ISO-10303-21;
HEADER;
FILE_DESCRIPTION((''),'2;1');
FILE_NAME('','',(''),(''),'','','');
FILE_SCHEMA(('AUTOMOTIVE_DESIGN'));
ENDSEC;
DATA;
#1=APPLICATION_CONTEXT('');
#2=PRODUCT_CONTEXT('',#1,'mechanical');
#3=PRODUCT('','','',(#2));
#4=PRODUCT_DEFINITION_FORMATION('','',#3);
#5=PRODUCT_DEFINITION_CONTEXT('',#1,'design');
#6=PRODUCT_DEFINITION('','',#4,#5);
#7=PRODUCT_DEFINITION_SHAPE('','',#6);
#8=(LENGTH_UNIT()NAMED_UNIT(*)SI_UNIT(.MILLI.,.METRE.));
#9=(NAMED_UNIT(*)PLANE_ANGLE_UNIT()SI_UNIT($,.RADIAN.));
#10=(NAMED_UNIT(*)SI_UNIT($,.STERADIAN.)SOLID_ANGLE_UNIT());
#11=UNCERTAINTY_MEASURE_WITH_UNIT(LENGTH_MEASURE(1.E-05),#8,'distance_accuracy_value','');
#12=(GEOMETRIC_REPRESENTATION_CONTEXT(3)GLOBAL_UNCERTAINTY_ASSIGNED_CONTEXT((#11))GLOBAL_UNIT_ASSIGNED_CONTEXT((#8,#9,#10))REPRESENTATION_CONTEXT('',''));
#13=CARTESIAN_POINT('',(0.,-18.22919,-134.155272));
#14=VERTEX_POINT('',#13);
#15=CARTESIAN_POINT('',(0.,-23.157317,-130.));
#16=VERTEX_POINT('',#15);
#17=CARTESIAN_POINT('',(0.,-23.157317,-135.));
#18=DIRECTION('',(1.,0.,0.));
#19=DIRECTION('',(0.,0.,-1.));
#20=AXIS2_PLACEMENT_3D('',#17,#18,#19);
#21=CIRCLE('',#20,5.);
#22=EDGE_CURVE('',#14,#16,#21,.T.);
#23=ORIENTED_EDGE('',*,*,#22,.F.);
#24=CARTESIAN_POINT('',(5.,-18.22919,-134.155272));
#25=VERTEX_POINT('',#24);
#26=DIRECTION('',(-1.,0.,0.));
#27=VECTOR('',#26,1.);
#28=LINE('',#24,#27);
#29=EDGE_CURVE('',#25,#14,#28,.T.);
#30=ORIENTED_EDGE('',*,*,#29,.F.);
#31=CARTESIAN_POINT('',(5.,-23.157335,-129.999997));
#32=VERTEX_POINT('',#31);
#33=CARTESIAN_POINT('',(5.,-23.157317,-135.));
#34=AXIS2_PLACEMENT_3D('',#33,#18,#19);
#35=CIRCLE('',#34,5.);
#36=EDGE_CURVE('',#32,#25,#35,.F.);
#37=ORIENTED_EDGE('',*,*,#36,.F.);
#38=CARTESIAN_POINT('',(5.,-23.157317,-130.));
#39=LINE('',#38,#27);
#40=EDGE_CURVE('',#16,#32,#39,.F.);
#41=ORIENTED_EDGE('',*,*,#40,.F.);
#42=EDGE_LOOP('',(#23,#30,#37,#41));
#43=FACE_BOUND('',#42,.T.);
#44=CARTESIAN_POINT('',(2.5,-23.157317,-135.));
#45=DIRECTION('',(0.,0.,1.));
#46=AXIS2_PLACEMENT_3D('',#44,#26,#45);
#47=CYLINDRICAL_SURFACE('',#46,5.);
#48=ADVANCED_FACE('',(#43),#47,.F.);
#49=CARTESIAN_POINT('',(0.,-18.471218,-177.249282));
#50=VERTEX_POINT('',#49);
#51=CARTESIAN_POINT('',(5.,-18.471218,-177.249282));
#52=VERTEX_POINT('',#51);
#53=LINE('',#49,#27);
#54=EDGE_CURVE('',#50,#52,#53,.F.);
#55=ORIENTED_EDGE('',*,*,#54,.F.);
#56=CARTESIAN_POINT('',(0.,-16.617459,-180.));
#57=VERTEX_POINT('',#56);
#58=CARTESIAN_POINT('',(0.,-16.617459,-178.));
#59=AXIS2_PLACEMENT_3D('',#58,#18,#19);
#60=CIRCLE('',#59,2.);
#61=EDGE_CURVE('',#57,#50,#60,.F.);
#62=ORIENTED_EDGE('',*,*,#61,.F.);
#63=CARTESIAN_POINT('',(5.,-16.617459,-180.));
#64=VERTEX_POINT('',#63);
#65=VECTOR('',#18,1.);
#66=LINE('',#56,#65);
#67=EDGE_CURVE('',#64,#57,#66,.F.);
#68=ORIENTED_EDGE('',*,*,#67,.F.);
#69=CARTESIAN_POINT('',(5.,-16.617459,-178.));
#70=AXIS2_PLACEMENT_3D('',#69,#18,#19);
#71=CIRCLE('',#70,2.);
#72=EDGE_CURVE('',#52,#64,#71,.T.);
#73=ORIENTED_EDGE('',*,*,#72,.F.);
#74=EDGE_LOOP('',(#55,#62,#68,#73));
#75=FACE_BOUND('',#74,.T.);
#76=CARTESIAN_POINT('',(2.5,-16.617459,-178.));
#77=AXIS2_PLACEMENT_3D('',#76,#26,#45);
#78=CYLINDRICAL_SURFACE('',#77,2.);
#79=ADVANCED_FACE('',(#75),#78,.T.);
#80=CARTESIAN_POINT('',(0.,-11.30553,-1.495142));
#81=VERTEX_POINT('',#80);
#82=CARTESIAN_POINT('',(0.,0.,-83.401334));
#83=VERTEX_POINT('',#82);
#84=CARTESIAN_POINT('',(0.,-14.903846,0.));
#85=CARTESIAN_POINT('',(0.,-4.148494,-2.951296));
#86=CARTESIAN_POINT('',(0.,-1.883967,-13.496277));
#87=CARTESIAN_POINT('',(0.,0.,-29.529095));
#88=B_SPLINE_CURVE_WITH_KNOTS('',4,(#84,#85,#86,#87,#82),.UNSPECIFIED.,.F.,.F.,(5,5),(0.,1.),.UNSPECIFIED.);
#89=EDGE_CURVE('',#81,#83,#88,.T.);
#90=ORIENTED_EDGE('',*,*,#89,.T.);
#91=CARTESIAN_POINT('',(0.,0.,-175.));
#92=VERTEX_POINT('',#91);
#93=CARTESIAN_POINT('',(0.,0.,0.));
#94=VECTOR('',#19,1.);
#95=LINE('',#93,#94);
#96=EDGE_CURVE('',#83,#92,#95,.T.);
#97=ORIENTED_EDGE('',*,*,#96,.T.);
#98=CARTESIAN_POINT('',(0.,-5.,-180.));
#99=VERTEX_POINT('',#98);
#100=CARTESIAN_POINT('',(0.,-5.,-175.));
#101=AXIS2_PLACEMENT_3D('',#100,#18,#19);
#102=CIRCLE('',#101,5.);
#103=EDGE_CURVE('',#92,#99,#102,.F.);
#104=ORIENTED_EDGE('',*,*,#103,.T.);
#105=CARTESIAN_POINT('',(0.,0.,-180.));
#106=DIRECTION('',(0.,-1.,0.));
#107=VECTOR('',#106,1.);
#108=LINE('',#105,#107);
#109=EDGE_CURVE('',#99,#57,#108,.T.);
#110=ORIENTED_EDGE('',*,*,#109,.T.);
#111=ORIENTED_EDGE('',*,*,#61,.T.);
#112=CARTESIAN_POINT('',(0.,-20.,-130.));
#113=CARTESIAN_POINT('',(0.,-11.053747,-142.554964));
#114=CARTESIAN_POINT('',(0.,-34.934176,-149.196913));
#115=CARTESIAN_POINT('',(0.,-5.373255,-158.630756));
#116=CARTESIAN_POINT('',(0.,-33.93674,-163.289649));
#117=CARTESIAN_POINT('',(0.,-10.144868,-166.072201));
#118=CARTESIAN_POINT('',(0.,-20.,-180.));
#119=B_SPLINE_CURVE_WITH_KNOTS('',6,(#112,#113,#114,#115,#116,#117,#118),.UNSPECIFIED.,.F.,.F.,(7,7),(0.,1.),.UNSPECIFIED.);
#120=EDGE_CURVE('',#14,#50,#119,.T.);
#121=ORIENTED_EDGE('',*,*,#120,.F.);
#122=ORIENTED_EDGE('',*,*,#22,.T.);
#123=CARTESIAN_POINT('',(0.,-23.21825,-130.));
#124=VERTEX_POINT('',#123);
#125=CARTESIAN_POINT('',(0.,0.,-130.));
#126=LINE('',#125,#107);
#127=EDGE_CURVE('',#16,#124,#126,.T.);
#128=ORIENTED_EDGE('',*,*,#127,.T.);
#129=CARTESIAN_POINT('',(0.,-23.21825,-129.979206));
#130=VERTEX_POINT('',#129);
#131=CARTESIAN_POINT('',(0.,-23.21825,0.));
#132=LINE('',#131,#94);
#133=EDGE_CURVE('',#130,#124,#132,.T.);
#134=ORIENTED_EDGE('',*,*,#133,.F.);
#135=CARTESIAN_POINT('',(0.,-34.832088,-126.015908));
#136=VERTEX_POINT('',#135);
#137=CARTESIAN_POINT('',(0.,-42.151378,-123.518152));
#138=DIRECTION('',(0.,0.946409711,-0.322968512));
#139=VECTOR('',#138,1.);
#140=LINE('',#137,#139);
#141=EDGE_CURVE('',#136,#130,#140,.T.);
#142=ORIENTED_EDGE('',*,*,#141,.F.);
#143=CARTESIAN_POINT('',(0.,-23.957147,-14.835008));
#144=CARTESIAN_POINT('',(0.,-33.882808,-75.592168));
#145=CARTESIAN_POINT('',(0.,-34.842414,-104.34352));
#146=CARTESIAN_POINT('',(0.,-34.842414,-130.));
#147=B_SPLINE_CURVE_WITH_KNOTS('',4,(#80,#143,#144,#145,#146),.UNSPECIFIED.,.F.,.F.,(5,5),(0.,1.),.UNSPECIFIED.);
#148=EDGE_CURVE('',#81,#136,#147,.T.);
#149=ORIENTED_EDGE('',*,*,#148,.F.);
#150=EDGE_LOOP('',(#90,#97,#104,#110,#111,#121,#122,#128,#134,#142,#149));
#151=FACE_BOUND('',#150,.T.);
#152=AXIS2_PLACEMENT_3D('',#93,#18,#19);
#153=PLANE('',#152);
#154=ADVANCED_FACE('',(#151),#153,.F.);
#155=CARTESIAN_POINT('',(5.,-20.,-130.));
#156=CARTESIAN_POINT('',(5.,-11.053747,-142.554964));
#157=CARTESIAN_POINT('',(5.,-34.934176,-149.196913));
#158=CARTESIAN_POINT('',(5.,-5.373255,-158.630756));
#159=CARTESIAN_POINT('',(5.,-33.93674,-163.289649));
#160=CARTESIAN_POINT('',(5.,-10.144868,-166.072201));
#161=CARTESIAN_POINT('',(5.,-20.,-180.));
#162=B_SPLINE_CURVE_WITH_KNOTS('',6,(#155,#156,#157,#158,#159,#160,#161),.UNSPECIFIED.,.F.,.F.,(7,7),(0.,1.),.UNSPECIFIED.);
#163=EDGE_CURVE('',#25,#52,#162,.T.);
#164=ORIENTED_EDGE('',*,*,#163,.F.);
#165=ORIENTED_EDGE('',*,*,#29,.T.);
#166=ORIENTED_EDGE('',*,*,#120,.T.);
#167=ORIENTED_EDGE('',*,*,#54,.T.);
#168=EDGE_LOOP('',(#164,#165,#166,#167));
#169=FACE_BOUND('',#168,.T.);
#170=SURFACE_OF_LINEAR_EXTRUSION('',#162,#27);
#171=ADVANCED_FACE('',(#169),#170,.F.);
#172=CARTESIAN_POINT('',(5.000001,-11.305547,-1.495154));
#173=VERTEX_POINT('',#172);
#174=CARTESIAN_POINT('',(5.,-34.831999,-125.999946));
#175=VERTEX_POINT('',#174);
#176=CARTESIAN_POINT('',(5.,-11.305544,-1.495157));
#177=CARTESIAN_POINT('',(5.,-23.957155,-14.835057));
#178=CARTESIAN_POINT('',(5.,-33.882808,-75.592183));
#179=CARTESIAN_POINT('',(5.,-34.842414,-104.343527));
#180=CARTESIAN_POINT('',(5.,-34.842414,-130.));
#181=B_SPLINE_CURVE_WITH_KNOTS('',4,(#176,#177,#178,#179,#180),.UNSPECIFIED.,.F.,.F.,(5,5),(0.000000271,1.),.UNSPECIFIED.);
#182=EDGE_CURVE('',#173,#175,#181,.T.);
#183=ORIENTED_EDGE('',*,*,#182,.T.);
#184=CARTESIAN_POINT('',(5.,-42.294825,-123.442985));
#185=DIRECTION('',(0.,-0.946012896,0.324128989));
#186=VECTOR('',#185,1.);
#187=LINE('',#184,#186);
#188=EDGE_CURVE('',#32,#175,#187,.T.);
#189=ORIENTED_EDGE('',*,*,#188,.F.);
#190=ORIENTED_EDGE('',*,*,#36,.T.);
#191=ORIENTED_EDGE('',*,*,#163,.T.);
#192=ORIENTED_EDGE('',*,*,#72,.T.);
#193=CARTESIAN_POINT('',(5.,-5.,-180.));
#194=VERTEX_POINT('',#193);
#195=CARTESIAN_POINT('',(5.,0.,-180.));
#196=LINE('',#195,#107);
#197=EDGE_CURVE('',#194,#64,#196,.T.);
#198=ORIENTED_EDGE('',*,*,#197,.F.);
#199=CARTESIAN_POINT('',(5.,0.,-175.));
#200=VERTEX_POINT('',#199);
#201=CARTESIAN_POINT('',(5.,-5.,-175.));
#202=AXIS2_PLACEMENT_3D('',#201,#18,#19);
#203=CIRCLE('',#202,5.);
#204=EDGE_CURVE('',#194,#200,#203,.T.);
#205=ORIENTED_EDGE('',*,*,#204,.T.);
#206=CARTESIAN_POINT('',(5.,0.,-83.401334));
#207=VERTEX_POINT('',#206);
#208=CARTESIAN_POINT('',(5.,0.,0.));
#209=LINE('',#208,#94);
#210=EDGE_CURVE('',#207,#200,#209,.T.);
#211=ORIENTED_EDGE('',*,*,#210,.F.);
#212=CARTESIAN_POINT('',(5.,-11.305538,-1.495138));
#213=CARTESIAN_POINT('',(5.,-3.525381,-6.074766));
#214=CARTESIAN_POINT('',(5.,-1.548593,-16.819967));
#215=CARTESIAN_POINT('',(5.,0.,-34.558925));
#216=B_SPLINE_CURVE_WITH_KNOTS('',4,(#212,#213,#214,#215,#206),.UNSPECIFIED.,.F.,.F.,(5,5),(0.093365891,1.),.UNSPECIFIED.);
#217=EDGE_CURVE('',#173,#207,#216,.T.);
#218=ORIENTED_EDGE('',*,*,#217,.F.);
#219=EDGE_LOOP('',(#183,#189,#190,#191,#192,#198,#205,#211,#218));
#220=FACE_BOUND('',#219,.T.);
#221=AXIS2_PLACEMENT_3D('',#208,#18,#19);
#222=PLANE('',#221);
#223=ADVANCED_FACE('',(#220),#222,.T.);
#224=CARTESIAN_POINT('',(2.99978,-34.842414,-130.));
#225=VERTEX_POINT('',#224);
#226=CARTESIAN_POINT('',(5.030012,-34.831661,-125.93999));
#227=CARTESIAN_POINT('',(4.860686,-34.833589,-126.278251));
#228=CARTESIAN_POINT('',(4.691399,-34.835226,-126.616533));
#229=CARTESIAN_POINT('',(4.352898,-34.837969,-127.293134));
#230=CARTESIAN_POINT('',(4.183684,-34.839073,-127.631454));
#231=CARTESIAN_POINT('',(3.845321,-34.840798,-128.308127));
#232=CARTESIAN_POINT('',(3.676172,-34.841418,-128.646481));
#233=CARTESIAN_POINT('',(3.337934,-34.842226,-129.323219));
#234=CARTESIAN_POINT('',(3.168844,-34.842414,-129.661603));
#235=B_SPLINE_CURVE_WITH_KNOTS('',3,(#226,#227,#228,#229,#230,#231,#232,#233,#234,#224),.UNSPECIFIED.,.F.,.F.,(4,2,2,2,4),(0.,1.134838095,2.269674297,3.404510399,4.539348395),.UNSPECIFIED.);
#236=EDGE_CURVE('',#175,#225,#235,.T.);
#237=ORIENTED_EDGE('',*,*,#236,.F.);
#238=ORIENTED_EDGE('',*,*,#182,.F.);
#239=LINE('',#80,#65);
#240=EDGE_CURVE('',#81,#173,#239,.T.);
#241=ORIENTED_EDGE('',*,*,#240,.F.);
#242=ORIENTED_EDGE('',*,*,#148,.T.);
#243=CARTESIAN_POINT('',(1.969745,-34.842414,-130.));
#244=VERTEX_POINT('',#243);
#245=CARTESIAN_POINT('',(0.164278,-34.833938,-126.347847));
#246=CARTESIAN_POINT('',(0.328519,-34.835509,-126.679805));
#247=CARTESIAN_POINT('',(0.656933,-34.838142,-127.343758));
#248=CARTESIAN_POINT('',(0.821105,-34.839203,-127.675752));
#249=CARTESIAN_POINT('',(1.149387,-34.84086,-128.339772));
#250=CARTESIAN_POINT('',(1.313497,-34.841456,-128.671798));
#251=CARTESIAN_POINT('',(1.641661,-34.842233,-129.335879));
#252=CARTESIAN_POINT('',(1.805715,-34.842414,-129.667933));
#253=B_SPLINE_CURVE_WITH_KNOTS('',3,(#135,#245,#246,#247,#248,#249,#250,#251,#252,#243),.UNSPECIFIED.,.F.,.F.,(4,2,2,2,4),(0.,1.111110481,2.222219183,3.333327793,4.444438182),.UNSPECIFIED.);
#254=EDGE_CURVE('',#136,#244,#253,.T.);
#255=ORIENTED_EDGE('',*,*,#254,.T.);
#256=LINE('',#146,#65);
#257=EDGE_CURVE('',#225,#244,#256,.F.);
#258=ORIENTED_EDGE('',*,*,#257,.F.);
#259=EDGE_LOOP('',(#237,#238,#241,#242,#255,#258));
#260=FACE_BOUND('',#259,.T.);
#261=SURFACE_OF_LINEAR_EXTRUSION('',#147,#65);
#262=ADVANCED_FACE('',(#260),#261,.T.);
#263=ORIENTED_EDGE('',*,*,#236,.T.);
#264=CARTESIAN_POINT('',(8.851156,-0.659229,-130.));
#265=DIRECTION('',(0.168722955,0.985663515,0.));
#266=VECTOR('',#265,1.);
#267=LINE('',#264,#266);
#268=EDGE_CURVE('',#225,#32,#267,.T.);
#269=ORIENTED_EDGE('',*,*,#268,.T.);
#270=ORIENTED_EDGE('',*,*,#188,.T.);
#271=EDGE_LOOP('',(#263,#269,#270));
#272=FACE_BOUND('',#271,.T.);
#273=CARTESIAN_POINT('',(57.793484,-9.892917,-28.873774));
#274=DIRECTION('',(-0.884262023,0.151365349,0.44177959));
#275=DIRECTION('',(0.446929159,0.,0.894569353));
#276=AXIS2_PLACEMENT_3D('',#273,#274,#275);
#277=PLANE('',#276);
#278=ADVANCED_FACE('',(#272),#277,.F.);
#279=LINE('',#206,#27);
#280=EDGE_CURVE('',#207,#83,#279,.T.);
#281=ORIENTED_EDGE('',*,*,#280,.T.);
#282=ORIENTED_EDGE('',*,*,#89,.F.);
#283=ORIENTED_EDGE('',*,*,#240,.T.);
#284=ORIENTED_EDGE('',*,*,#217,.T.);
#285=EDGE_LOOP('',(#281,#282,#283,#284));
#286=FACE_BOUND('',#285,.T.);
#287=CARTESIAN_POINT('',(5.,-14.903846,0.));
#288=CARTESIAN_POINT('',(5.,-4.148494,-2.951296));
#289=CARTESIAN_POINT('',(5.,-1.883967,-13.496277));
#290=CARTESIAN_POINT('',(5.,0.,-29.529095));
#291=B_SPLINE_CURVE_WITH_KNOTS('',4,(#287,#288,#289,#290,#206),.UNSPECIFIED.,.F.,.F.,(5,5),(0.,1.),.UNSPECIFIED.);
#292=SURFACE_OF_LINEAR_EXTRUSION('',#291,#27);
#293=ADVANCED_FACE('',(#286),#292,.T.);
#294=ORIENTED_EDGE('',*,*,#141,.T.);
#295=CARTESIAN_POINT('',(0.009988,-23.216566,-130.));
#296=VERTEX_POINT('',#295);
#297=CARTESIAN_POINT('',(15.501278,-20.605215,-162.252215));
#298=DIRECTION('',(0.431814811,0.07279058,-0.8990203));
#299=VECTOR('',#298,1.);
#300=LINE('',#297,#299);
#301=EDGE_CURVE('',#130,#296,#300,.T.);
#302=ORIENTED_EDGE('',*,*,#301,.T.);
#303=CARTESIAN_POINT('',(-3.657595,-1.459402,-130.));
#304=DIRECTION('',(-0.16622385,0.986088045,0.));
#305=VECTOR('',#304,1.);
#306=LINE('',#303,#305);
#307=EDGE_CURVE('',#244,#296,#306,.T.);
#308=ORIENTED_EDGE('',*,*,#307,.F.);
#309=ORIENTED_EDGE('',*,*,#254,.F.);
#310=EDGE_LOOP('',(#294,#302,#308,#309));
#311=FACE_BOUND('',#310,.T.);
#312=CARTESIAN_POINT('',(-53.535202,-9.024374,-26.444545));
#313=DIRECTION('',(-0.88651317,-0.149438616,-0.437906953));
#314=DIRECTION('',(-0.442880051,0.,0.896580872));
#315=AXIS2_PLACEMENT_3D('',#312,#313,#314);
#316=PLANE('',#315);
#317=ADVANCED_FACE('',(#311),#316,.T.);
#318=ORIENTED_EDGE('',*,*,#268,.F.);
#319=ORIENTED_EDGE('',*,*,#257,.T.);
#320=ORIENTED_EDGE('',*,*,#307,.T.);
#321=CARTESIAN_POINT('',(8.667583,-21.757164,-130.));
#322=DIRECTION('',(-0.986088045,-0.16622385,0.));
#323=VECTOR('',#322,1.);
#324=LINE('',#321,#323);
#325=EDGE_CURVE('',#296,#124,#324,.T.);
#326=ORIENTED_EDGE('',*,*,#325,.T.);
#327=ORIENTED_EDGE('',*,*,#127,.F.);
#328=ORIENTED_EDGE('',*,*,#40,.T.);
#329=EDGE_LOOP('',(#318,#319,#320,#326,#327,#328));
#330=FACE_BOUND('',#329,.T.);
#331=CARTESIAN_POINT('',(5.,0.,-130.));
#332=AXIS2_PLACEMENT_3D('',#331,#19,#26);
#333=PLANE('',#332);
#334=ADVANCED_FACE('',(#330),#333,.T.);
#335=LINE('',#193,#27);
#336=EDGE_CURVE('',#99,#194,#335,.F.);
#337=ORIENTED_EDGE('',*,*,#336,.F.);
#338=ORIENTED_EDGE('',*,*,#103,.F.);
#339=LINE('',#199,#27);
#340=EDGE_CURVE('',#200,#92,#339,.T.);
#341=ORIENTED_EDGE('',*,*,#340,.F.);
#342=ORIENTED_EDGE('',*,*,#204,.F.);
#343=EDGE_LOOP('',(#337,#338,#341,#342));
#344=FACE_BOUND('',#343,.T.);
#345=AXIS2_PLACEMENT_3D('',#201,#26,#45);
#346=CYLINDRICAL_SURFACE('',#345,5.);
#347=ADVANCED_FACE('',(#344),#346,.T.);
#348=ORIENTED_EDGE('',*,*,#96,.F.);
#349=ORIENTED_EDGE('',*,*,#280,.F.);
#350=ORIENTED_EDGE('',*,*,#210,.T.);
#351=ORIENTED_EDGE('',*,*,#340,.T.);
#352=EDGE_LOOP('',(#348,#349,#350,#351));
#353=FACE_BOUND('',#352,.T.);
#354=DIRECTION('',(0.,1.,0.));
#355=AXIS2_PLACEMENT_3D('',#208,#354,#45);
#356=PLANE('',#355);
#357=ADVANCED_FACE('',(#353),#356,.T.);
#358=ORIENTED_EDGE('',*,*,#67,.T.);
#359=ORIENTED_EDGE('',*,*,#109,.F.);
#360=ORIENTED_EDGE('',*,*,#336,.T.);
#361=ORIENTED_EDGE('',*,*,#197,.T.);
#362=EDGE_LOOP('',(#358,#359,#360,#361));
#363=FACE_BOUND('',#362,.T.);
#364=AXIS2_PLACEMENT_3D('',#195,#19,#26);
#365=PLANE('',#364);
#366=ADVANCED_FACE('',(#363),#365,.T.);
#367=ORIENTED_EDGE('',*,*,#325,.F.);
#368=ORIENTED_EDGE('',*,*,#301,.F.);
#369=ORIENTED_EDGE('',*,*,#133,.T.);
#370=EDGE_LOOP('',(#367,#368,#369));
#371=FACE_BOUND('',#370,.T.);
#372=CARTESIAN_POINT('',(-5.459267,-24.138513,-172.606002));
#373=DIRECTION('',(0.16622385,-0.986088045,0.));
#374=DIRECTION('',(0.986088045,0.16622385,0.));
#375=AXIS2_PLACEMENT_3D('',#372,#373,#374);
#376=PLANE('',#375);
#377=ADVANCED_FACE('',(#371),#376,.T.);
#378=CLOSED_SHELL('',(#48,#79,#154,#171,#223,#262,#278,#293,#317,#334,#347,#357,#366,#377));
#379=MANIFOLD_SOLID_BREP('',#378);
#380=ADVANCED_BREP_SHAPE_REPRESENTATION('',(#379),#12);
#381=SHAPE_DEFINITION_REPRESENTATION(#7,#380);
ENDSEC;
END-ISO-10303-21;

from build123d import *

# Parameters (mm, degrees)
EXTRUDE_1_DEPTH          = 5
FILLET_6_R               = 5
FILLET_7_R               = 2
FILLET_8_R               = 5
CUT_EXTRUDE_1_DEPTH      = 185.424559073
CUT_EXTRUDE_1_DEPTH_BACK = 185.424559073
SKETCH_6_W               = 27.094284284
SKETCH_6_H               = 20.392851323
CUT_EXTRUDE_2_DEPTH      = 164.712248904
SKETCH_7_W               = 91.771448639
SKETCH_7_H               = 20.028601632
CUT_EXTRUDE_3_DEPTH      = 167.349688769


# Read off the part's stored shape, not the designer's step: 凸台-拉伸1
with BuildPart() as part:
    # 凸台-拉伸1 outline → 凸台-拉伸1 (new body)
    with BuildSketch(Plane(origin=(0, 0, 0), x_dir=(0, 0, -1), z_dir=(1, 0, 0))):
        with BuildLine():
            add(Edge.make_bspline(
                [(0, -14.903846424), (2.951295662, -4.14849373), (13.496276672, -1.883966721), (29.52909514, 0), (83.401333812, 0)],
                knots=[0, 0, 0, 0, 0, 1, 1, 1, 1, 1], degree=4))
            add(Edge.make_bspline(
                [(0, -14.903846424), (13.738939295, -26.332723654), (29.4774768, -32.710998586), (74.674999713, -39.156033076), (130, -39.931386408)],
                knots=[0, 0, 0, 0, 0, 0.958214361, 0.958214361, 0.958214361, 0.958214361, 0.958214361], degree=4))
            Line((130, -39.931386408), (130, -20))
            add(Edge.make_bspline(
                [(130, -20), (142.554964398, -11.053747082), (149.196912904, -34.934175524), (158.630756241, -5.373255264), (163.289648635, -33.936740498), (166.072200522, -10.144868391), (180, -20)],
                knots=[0, 0, 0, 0, 0, 0, 0, 1, 1, 1, 1, 1, 1, 1], degree=6))
            Line((180, -20), (180, 0))
            Line((180, 0), (83.401333812, 0))
        make_face()
    extrude(amount=EXTRUDE_1_DEPTH)

    # 圆角6
    fillet_6_edges = [part.edges().sort_by_distance(p)[0] for p in [
        (2.5, -20, -130),
    ]]
    fillet(fillet_6_edges, radius=FILLET_6_R)

    # 圆角7
    fillet_7_edges = [part.edges().sort_by_distance(p)[0] for p in [
        (2.5, -20, -180),
    ]]
    fillet(fillet_7_edges, radius=FILLET_7_R)

    # 圆角8
    fillet_8_edges = [part.edges().sort_by_distance(p)[0] for p in [
        (2.5, 0, -180),
        (2.5, -39.931386408, -130),
    ]]
    fillet(fillet_8_edges, radius=FILLET_8_R)

    # 草图4 → 切除-拉伸1 (cut, two sides: drawn at the far end of the back side and taken through both)
    with BuildSketch(Plane(origin=(5, 0, 0), x_dir=(0, 0, -1), z_dir=(1, 0, 0)).offset(-CUT_EXTRUDE_1_DEPTH_BACK)):
        with BuildLine():
            add(Edge.make_bspline(
                [(1.495142471, -11.305529877), (14.835007519, -23.95714683), (75.592167753, -33.882807925), (104.343520452, -34.842413885), (130, -34.842413885)],
                knots=[0, 0, 0, 0, 0, 1, 1, 1, 1, 1], degree=4))
            add(Edge.make_bspline(
                [(0, -14.903846424), (0.275551051, -13.899660779), (0.617298034, -12.969491649), (1.023527011, -12.106738133), (1.495142471, -11.305529877)],
                knots=[0, 0, 0, 0, 0, 0.093366129, 0.093366129, 0.093366129, 0.093366129, 0.093366129], degree=4))
            add(Edge.make_bspline(
                [(0, -14.903846424), (13.419828476, -26.067268054), (28.7474456, -32.411980768), (71.57295957, -38.706985512), (124.893658481, -39.841282905)],
                knots=[0, 0, 0, 0, 0, 0.935958162, 0.935958162, 0.935958162, 0.935958162, 0.935958162], degree=4))
            add(Edge.make_bspline(
                [(130, -34.842413884), (130, -35.028759319), (129.99166601, -35.216258569), (129.974804907, -35.404332472), (129.94928895, -35.592386619), (129.915057389, -35.77981586), (129.841480351, -36.098859681), (129.806409214, -36.231082745), (129.766907364, -36.362456276), (129.722994517, -36.492760695), (129.674707397, -36.621778563), (129.58487848, -36.839515421), (129.545494286, -36.928984789), (129.503966151, -37.017626664), (129.46031708, -37.10536636), (129.414574093, -37.192130532), (129.250587102, -37.486161652), (129.122218575, -37.688294916), (128.98211374, -37.883204904), (128.830848248, -38.069925037), (128.669117931, -38.247570978), (128.255836276, -38.652154349), (127.994673555, -38.869333518), (127.716552177, -39.064613196), (127.424118002, -39.236250049), (127.120264983, -39.382959218), (126.679539096, -39.553907949), (126.549523427, -39.599440156), (126.418314531, -39.640571717), (126.286130578, -39.677270539), (126.153191519, -39.709521582), (125.832655006, -39.776296457), (125.644540113, -39.806533973), (125.455985822, -39.828044566), (125.267595854, -39.840901842), (125.079961766, -39.845246156), (124.893658481, -39.841282905)],
                knots=[0, 0, 0, 0, 0, 0, 0, 0.145130031, 0.145130031, 0.145130031, 0.145130031, 0.145130031, 0.248682026, 0.248682026, 0.248682026, 0.248682026, 0.248682026, 0.321947701, 0.321947701, 0.321947701, 0.321947701, 0.321947701, 0.500002972, 0.500002972, 0.500002972, 0.500002972, 0.500002972, 0.751317975, 0.751317975, 0.751317975, 0.751317975, 0.751317975, 0.85486997, 0.85486997, 0.85486997, 0.85486997, 0.85486997, 1, 1, 1, 1, 1, 1, 1], degree=6))
        make_face()
    extrude(amount=CUT_EXTRUDE_1_DEPTH + CUT_EXTRUDE_1_DEPTH_BACK, mode=Mode.SUBTRACT)

    # 草图6 → 切除-拉伸2 (cut, through all)
    with BuildSketch(Plane(origin=(57.793484303, -9.892917122, -28.873774023), x_dir=(-0.4401729492006857, 0.04581450966450186, -0.8967434446351822), z_dir=(0.88426202268349, -0.1513653487033851, -0.4417795903520281))):
        with Locations((120.420599257, -28.887536231)):
            Rectangle(SKETCH_6_W, SKETCH_6_H)
    extrude(amount=CUT_EXTRUDE_2_DEPTH, mode=Mode.SUBTRACT)

    # 草图7 → 切除-拉伸3 (cut, through all)
    with BuildSketch(Plane(origin=(-53.53520172, -9.024374029, -26.444544598), x_dir=(-0.43181481098590574, -0.07279057966413091, 0.8990203003966966), z_dir=(-0.886513170069574, -0.14943861555354754, -0.437906952987314))):
        with Locations((-105.176126902, -32.909539251)):
            Rectangle(SKETCH_7_W, SKETCH_7_H)
    extrude(amount=CUT_EXTRUDE_3_DEPTH, mode=Mode.SUBTRACT)


solid = part.part
